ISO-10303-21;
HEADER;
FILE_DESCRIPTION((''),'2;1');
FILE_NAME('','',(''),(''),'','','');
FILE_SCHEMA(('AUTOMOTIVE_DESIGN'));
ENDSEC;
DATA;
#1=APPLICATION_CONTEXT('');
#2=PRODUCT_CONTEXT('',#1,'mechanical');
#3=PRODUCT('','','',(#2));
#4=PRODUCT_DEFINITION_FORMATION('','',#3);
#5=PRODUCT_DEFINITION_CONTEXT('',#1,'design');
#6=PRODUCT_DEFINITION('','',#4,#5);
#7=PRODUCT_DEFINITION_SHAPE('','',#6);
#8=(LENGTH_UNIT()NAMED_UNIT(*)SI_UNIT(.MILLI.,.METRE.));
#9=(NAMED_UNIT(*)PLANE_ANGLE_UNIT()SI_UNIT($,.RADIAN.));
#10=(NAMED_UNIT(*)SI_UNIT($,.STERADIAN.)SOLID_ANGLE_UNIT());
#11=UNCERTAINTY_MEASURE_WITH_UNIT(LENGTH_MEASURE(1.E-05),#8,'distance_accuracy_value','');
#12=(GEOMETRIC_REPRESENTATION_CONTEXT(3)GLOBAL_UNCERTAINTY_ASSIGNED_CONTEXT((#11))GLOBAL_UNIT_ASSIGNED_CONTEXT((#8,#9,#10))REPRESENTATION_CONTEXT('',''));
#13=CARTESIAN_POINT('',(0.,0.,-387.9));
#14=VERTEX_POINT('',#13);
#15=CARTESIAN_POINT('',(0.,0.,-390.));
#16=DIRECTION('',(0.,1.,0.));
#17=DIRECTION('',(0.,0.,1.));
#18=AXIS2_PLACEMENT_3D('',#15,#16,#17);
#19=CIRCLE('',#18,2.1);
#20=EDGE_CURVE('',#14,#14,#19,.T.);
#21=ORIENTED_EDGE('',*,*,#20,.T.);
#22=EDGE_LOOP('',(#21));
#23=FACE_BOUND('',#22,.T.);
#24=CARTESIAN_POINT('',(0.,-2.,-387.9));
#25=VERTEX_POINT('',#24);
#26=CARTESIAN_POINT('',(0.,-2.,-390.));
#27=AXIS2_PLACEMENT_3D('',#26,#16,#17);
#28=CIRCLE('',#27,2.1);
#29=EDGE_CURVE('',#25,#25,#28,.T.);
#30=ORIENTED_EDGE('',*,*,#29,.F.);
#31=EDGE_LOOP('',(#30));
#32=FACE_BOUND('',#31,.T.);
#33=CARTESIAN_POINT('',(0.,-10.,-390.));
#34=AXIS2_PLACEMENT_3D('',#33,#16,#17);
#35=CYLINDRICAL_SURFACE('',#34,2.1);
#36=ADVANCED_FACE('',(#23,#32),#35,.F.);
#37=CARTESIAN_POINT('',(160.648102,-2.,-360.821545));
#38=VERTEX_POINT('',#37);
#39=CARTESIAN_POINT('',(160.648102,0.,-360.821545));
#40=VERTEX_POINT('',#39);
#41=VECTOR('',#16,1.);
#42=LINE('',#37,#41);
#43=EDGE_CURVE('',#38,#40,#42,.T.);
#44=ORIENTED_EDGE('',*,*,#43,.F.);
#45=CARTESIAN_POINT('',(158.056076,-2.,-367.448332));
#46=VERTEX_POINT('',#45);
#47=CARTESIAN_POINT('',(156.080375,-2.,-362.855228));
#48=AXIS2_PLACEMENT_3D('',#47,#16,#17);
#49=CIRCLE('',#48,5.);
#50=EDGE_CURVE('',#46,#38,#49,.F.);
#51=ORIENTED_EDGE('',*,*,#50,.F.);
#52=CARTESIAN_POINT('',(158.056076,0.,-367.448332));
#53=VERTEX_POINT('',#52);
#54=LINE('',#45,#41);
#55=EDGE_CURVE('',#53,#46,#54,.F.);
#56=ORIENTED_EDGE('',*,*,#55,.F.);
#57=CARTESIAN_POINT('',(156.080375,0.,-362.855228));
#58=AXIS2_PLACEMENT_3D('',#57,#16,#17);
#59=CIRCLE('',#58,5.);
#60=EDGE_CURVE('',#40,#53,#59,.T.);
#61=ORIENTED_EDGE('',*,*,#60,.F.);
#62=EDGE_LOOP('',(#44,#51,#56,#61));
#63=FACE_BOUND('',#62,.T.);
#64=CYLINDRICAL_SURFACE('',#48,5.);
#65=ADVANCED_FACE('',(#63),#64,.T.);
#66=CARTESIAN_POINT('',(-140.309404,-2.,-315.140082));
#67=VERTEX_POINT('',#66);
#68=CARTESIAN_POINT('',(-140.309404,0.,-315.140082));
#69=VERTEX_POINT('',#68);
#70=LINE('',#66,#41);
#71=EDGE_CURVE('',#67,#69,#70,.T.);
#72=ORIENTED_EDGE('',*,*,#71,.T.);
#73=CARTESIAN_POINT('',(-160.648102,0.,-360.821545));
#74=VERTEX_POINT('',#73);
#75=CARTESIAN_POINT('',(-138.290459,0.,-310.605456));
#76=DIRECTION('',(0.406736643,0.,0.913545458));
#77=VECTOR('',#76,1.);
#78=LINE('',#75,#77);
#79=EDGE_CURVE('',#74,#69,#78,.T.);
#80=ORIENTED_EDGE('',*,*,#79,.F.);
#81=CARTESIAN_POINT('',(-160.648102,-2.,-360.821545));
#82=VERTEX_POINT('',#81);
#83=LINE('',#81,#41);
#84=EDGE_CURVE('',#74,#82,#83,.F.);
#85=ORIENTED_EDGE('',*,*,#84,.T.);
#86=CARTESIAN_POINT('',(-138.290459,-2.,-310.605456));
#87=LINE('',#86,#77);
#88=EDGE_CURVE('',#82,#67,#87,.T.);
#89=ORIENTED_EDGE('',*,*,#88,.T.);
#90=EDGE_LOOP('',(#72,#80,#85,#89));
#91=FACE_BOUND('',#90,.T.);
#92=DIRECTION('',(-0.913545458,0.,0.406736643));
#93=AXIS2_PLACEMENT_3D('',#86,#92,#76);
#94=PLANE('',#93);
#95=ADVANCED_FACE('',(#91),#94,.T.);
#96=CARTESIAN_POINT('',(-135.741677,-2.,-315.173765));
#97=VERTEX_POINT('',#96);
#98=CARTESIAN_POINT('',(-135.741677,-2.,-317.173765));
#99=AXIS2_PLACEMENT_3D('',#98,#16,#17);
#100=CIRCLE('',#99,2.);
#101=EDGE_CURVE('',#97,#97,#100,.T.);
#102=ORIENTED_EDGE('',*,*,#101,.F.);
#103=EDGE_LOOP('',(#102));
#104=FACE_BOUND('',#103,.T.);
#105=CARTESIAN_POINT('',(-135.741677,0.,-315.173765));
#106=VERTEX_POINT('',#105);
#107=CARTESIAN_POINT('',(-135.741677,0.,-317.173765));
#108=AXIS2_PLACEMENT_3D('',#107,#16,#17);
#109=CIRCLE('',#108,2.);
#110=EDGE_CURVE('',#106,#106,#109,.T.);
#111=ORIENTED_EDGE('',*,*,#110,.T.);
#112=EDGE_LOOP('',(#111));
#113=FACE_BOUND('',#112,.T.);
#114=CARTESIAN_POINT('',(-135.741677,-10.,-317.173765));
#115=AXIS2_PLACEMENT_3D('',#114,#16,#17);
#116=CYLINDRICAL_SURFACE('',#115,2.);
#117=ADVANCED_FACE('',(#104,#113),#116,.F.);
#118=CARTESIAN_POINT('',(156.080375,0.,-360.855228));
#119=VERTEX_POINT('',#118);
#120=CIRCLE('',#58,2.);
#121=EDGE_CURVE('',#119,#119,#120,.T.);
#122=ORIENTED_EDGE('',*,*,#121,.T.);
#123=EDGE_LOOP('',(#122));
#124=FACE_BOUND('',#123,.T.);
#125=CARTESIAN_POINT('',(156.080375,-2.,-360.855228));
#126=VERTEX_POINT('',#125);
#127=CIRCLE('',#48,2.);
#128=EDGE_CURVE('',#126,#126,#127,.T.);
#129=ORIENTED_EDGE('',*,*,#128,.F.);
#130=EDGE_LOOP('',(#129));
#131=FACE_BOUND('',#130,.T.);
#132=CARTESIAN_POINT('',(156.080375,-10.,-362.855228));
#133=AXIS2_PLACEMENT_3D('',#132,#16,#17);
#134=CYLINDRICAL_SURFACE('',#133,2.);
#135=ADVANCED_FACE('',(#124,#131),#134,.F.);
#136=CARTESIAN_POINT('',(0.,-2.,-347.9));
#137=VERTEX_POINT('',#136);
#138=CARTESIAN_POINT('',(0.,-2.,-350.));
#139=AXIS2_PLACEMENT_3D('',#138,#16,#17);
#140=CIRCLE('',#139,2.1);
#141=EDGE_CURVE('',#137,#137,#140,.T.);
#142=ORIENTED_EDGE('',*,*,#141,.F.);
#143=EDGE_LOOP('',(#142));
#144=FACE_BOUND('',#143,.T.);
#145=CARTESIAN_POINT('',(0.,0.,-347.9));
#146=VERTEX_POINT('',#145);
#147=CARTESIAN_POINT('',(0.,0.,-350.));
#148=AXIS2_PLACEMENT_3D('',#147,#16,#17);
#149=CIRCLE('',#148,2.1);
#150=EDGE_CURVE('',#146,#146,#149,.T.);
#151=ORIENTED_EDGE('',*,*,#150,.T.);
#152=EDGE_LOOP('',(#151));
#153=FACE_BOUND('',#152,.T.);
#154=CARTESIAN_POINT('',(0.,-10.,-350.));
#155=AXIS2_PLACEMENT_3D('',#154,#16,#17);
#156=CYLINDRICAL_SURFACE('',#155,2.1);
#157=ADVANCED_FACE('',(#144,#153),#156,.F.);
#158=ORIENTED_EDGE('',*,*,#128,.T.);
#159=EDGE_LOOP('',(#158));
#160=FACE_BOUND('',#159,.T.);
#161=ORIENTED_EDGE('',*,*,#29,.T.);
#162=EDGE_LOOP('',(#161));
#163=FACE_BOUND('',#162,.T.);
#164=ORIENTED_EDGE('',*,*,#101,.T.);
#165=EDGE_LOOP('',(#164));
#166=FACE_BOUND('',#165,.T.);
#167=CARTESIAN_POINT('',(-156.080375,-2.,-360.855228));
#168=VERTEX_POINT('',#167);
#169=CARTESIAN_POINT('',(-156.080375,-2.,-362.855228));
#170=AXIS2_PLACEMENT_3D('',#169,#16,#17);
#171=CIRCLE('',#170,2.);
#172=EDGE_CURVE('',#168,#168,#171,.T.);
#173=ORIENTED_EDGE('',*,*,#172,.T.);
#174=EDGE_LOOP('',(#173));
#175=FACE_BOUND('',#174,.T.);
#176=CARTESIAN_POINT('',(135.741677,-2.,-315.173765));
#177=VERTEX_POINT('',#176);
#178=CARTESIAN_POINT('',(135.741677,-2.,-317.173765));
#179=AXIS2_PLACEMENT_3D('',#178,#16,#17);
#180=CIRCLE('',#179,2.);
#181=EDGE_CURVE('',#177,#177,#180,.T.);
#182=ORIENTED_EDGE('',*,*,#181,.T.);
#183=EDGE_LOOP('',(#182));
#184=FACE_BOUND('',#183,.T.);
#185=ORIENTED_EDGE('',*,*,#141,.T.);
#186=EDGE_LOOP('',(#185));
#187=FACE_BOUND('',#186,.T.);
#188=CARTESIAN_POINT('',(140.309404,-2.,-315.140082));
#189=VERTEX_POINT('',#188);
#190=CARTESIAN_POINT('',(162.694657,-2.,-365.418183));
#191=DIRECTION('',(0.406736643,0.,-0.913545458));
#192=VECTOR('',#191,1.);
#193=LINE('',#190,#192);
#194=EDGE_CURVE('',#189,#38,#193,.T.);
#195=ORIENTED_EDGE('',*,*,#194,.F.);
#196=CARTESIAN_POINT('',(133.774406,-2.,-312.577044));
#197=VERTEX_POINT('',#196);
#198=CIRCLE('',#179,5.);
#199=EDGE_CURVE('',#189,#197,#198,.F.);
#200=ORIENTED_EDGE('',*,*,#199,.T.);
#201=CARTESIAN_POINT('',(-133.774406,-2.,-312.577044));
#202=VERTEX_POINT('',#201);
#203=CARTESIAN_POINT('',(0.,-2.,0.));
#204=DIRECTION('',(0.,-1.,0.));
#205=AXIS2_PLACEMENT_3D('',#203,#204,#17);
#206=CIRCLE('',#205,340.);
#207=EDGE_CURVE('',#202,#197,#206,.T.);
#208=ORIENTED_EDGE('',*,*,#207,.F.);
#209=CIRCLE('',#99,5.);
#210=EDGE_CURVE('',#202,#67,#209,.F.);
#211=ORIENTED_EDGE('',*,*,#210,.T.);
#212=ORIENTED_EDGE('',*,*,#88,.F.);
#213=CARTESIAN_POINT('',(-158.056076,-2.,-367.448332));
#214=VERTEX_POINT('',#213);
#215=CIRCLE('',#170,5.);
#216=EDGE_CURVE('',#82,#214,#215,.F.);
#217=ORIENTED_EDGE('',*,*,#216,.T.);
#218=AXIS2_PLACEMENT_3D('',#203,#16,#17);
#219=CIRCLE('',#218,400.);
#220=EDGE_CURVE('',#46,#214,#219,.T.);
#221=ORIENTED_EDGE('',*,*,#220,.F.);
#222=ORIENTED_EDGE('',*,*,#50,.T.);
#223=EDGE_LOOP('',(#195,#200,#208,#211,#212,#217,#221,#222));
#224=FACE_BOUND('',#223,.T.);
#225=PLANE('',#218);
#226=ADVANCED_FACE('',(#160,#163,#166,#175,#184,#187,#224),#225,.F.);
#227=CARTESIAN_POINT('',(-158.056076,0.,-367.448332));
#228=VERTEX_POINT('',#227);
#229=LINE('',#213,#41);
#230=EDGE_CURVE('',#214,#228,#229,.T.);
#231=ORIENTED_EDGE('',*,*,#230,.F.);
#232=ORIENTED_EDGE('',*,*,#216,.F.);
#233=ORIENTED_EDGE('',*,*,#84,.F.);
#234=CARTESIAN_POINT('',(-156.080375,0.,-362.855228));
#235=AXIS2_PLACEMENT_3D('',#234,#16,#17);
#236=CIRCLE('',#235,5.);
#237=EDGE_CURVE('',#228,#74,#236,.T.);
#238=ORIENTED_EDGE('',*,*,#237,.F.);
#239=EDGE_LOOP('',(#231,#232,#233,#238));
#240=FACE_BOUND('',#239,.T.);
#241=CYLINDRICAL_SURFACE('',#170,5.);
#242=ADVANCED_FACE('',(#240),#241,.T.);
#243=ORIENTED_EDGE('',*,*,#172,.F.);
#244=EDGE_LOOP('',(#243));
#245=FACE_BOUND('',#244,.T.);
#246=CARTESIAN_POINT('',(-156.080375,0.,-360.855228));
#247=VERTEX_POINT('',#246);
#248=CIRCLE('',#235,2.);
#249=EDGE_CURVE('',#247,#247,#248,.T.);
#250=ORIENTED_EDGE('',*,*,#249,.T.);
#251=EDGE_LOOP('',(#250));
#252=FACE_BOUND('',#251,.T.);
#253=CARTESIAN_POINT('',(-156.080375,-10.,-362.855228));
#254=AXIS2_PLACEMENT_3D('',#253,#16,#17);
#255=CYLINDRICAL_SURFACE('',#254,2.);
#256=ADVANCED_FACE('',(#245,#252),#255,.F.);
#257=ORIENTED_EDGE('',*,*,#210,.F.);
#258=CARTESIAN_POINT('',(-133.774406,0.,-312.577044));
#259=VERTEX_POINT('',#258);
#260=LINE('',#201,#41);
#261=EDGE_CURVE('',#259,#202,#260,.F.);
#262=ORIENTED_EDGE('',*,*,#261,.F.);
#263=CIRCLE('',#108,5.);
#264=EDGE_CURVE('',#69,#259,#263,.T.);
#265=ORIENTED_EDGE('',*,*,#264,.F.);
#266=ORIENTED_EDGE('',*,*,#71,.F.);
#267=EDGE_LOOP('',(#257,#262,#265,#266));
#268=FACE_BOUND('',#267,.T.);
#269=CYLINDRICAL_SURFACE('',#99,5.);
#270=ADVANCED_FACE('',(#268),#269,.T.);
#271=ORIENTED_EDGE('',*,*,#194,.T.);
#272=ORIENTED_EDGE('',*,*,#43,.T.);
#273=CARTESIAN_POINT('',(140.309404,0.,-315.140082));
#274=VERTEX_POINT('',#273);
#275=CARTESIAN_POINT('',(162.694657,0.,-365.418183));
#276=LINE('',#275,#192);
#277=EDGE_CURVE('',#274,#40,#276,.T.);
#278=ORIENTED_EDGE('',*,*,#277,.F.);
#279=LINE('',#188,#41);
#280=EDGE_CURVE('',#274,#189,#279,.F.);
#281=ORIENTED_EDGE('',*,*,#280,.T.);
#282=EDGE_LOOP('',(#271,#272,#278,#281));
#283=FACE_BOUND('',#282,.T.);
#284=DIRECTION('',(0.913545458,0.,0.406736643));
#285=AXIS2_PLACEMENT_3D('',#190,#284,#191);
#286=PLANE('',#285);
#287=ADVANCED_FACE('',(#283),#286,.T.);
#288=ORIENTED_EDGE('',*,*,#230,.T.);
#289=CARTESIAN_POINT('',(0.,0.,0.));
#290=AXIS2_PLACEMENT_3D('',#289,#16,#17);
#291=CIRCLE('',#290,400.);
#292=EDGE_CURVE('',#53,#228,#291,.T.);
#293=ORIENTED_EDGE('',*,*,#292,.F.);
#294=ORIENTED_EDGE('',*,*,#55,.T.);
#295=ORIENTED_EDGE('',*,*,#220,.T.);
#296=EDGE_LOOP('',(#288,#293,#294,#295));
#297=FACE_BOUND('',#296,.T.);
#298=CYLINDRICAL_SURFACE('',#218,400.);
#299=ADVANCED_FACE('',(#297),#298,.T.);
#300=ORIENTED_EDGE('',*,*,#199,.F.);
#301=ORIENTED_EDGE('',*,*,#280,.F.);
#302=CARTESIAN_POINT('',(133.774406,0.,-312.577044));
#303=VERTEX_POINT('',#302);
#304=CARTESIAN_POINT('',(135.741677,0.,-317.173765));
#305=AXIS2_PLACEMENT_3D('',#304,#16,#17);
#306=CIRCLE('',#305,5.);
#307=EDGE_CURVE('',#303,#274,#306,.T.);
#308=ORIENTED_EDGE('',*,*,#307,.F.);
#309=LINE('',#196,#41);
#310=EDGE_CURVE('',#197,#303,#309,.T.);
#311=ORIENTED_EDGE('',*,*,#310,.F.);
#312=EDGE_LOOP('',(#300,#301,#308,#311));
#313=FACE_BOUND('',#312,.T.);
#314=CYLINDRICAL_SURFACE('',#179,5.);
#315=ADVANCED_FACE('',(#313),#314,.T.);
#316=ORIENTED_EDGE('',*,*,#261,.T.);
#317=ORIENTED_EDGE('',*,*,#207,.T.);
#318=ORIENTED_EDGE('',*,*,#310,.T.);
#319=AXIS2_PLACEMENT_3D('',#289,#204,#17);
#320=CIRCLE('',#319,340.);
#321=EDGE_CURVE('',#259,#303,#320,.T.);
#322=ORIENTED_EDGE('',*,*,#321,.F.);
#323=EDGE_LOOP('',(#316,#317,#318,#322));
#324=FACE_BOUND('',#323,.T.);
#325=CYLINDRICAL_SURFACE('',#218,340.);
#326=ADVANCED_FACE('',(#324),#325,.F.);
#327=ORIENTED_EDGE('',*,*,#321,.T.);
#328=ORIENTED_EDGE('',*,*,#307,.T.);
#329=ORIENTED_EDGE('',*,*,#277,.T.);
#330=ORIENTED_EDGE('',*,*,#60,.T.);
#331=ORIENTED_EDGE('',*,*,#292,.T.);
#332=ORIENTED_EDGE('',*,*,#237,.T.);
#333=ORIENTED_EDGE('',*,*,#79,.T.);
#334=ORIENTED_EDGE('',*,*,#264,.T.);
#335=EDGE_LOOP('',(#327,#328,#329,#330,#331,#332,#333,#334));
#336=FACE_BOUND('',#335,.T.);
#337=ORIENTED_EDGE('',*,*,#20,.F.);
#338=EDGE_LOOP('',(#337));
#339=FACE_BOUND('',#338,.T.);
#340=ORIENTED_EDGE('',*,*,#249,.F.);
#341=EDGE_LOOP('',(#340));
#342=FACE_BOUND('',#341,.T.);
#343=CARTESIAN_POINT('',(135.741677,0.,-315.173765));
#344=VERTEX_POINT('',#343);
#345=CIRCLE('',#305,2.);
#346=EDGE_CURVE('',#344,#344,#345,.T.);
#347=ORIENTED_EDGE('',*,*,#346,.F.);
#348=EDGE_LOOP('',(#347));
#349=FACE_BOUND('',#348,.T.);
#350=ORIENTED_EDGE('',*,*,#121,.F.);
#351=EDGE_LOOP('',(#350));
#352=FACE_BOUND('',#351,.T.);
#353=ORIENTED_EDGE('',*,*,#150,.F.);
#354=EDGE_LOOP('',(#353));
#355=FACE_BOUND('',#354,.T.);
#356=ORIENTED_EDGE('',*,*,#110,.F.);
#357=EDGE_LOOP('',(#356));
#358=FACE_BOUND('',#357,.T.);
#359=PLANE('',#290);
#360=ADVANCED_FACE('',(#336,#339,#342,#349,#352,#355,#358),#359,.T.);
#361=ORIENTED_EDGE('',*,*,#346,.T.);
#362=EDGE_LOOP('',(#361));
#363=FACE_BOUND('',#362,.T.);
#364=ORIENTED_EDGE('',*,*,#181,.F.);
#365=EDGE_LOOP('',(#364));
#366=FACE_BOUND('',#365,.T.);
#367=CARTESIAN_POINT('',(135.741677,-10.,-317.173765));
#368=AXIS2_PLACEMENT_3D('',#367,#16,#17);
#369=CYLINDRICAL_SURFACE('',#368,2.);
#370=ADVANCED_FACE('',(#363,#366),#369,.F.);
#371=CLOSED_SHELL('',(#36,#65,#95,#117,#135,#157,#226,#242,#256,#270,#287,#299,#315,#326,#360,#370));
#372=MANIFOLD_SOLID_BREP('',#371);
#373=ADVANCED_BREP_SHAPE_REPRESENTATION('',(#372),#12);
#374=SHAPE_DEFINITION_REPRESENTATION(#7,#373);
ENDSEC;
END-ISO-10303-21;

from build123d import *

# Parameters (mm, degrees)
SM_BASE_FLANGE_1_DEPTH = 2
FILLET_1_R             = 5
SKETCH_2_R             = 2.1
CUT_EXTRUDE_1_DEPTH    = 10
SKETCH_3_R             = 2
CUT_EXTRUDE_2_DEPTH    = 10


# Sheet-metal steps are written as plain solids
with BuildPart() as part:
    # Sketch 1 → Базовая кромка1 (new body)
    with BuildSketch(Plane(origin=(0, 0, 0), x_dir=(1, 0, 0), z_dir=(0, 1, 0))):
        with BuildLine():
            Line((-138.290458646, 310.605455598), (-162.69465723, 365.418183057))
            ThreePointArc((-162.69465723, 365.418183057), (0, 400), (162.69465723, 365.418183057))
            Line((162.69465723, 365.418183057), (138.290458646, 310.605455598))
            ThreePointArc((138.290458646, 310.605455598), (0, 340), (-138.290458646, 310.605455598))
        make_face()
    extrude(amount=-SM_BASE_FLANGE_1_DEPTH)

    # Скругление1
    fillet_1_edges = [part.edges().sort_by_distance(p)[0] for p in [
        (-138.290458646, -1, -310.605455598),
        (-162.69465723, -1, -365.418183057),
        (162.69465723, -1, -365.418183057),
        (138.290458646, -1, -310.605455598),
    ]]
    fillet(fillet_1_edges, radius=FILLET_1_R)

    # Эскиз2 → Вырез-Вытянуть1 (cut)
    with BuildSketch(Plane(origin=(0, 0, 0), x_dir=(1, 0, 0), z_dir=(0, 1, 0))):
        with Locations(Location((0, 350, 0), (0, 0, 270))):
            Circle(SKETCH_2_R)
        with Locations(Location((0, 390, 0), (0, 0, 270))):
            Circle(SKETCH_2_R)
    extrude(amount=-CUT_EXTRUDE_1_DEPTH, mode=Mode.SUBTRACT)

    # Эскиз3 → Вырез-Вытянуть2 (cut)
    with BuildSketch(Plane(origin=(0, 0, 0), x_dir=(1, 0, 0), z_dir=(0, 1, 0))):
        with Locations(Location((-135.741676964, 317.173764891, 0), (0, 0, 270))):
            Circle(SKETCH_3_R)
        with Locations(Location((-156.080374798, 362.85522816, 0), (0, 0, 270))):
            Circle(SKETCH_3_R)
        with Locations(Location((135.741676964, 317.173764891, 0), (0, 0, 270))):
            Circle(SKETCH_3_R)
        with Locations(Location((156.080374798, 362.85522816, 0), (0, 0, 270))):
            Circle(SKETCH_3_R)
    extrude(amount=-CUT_EXTRUDE_2_DEPTH, mode=Mode.SUBTRACT)


solid = part.part
